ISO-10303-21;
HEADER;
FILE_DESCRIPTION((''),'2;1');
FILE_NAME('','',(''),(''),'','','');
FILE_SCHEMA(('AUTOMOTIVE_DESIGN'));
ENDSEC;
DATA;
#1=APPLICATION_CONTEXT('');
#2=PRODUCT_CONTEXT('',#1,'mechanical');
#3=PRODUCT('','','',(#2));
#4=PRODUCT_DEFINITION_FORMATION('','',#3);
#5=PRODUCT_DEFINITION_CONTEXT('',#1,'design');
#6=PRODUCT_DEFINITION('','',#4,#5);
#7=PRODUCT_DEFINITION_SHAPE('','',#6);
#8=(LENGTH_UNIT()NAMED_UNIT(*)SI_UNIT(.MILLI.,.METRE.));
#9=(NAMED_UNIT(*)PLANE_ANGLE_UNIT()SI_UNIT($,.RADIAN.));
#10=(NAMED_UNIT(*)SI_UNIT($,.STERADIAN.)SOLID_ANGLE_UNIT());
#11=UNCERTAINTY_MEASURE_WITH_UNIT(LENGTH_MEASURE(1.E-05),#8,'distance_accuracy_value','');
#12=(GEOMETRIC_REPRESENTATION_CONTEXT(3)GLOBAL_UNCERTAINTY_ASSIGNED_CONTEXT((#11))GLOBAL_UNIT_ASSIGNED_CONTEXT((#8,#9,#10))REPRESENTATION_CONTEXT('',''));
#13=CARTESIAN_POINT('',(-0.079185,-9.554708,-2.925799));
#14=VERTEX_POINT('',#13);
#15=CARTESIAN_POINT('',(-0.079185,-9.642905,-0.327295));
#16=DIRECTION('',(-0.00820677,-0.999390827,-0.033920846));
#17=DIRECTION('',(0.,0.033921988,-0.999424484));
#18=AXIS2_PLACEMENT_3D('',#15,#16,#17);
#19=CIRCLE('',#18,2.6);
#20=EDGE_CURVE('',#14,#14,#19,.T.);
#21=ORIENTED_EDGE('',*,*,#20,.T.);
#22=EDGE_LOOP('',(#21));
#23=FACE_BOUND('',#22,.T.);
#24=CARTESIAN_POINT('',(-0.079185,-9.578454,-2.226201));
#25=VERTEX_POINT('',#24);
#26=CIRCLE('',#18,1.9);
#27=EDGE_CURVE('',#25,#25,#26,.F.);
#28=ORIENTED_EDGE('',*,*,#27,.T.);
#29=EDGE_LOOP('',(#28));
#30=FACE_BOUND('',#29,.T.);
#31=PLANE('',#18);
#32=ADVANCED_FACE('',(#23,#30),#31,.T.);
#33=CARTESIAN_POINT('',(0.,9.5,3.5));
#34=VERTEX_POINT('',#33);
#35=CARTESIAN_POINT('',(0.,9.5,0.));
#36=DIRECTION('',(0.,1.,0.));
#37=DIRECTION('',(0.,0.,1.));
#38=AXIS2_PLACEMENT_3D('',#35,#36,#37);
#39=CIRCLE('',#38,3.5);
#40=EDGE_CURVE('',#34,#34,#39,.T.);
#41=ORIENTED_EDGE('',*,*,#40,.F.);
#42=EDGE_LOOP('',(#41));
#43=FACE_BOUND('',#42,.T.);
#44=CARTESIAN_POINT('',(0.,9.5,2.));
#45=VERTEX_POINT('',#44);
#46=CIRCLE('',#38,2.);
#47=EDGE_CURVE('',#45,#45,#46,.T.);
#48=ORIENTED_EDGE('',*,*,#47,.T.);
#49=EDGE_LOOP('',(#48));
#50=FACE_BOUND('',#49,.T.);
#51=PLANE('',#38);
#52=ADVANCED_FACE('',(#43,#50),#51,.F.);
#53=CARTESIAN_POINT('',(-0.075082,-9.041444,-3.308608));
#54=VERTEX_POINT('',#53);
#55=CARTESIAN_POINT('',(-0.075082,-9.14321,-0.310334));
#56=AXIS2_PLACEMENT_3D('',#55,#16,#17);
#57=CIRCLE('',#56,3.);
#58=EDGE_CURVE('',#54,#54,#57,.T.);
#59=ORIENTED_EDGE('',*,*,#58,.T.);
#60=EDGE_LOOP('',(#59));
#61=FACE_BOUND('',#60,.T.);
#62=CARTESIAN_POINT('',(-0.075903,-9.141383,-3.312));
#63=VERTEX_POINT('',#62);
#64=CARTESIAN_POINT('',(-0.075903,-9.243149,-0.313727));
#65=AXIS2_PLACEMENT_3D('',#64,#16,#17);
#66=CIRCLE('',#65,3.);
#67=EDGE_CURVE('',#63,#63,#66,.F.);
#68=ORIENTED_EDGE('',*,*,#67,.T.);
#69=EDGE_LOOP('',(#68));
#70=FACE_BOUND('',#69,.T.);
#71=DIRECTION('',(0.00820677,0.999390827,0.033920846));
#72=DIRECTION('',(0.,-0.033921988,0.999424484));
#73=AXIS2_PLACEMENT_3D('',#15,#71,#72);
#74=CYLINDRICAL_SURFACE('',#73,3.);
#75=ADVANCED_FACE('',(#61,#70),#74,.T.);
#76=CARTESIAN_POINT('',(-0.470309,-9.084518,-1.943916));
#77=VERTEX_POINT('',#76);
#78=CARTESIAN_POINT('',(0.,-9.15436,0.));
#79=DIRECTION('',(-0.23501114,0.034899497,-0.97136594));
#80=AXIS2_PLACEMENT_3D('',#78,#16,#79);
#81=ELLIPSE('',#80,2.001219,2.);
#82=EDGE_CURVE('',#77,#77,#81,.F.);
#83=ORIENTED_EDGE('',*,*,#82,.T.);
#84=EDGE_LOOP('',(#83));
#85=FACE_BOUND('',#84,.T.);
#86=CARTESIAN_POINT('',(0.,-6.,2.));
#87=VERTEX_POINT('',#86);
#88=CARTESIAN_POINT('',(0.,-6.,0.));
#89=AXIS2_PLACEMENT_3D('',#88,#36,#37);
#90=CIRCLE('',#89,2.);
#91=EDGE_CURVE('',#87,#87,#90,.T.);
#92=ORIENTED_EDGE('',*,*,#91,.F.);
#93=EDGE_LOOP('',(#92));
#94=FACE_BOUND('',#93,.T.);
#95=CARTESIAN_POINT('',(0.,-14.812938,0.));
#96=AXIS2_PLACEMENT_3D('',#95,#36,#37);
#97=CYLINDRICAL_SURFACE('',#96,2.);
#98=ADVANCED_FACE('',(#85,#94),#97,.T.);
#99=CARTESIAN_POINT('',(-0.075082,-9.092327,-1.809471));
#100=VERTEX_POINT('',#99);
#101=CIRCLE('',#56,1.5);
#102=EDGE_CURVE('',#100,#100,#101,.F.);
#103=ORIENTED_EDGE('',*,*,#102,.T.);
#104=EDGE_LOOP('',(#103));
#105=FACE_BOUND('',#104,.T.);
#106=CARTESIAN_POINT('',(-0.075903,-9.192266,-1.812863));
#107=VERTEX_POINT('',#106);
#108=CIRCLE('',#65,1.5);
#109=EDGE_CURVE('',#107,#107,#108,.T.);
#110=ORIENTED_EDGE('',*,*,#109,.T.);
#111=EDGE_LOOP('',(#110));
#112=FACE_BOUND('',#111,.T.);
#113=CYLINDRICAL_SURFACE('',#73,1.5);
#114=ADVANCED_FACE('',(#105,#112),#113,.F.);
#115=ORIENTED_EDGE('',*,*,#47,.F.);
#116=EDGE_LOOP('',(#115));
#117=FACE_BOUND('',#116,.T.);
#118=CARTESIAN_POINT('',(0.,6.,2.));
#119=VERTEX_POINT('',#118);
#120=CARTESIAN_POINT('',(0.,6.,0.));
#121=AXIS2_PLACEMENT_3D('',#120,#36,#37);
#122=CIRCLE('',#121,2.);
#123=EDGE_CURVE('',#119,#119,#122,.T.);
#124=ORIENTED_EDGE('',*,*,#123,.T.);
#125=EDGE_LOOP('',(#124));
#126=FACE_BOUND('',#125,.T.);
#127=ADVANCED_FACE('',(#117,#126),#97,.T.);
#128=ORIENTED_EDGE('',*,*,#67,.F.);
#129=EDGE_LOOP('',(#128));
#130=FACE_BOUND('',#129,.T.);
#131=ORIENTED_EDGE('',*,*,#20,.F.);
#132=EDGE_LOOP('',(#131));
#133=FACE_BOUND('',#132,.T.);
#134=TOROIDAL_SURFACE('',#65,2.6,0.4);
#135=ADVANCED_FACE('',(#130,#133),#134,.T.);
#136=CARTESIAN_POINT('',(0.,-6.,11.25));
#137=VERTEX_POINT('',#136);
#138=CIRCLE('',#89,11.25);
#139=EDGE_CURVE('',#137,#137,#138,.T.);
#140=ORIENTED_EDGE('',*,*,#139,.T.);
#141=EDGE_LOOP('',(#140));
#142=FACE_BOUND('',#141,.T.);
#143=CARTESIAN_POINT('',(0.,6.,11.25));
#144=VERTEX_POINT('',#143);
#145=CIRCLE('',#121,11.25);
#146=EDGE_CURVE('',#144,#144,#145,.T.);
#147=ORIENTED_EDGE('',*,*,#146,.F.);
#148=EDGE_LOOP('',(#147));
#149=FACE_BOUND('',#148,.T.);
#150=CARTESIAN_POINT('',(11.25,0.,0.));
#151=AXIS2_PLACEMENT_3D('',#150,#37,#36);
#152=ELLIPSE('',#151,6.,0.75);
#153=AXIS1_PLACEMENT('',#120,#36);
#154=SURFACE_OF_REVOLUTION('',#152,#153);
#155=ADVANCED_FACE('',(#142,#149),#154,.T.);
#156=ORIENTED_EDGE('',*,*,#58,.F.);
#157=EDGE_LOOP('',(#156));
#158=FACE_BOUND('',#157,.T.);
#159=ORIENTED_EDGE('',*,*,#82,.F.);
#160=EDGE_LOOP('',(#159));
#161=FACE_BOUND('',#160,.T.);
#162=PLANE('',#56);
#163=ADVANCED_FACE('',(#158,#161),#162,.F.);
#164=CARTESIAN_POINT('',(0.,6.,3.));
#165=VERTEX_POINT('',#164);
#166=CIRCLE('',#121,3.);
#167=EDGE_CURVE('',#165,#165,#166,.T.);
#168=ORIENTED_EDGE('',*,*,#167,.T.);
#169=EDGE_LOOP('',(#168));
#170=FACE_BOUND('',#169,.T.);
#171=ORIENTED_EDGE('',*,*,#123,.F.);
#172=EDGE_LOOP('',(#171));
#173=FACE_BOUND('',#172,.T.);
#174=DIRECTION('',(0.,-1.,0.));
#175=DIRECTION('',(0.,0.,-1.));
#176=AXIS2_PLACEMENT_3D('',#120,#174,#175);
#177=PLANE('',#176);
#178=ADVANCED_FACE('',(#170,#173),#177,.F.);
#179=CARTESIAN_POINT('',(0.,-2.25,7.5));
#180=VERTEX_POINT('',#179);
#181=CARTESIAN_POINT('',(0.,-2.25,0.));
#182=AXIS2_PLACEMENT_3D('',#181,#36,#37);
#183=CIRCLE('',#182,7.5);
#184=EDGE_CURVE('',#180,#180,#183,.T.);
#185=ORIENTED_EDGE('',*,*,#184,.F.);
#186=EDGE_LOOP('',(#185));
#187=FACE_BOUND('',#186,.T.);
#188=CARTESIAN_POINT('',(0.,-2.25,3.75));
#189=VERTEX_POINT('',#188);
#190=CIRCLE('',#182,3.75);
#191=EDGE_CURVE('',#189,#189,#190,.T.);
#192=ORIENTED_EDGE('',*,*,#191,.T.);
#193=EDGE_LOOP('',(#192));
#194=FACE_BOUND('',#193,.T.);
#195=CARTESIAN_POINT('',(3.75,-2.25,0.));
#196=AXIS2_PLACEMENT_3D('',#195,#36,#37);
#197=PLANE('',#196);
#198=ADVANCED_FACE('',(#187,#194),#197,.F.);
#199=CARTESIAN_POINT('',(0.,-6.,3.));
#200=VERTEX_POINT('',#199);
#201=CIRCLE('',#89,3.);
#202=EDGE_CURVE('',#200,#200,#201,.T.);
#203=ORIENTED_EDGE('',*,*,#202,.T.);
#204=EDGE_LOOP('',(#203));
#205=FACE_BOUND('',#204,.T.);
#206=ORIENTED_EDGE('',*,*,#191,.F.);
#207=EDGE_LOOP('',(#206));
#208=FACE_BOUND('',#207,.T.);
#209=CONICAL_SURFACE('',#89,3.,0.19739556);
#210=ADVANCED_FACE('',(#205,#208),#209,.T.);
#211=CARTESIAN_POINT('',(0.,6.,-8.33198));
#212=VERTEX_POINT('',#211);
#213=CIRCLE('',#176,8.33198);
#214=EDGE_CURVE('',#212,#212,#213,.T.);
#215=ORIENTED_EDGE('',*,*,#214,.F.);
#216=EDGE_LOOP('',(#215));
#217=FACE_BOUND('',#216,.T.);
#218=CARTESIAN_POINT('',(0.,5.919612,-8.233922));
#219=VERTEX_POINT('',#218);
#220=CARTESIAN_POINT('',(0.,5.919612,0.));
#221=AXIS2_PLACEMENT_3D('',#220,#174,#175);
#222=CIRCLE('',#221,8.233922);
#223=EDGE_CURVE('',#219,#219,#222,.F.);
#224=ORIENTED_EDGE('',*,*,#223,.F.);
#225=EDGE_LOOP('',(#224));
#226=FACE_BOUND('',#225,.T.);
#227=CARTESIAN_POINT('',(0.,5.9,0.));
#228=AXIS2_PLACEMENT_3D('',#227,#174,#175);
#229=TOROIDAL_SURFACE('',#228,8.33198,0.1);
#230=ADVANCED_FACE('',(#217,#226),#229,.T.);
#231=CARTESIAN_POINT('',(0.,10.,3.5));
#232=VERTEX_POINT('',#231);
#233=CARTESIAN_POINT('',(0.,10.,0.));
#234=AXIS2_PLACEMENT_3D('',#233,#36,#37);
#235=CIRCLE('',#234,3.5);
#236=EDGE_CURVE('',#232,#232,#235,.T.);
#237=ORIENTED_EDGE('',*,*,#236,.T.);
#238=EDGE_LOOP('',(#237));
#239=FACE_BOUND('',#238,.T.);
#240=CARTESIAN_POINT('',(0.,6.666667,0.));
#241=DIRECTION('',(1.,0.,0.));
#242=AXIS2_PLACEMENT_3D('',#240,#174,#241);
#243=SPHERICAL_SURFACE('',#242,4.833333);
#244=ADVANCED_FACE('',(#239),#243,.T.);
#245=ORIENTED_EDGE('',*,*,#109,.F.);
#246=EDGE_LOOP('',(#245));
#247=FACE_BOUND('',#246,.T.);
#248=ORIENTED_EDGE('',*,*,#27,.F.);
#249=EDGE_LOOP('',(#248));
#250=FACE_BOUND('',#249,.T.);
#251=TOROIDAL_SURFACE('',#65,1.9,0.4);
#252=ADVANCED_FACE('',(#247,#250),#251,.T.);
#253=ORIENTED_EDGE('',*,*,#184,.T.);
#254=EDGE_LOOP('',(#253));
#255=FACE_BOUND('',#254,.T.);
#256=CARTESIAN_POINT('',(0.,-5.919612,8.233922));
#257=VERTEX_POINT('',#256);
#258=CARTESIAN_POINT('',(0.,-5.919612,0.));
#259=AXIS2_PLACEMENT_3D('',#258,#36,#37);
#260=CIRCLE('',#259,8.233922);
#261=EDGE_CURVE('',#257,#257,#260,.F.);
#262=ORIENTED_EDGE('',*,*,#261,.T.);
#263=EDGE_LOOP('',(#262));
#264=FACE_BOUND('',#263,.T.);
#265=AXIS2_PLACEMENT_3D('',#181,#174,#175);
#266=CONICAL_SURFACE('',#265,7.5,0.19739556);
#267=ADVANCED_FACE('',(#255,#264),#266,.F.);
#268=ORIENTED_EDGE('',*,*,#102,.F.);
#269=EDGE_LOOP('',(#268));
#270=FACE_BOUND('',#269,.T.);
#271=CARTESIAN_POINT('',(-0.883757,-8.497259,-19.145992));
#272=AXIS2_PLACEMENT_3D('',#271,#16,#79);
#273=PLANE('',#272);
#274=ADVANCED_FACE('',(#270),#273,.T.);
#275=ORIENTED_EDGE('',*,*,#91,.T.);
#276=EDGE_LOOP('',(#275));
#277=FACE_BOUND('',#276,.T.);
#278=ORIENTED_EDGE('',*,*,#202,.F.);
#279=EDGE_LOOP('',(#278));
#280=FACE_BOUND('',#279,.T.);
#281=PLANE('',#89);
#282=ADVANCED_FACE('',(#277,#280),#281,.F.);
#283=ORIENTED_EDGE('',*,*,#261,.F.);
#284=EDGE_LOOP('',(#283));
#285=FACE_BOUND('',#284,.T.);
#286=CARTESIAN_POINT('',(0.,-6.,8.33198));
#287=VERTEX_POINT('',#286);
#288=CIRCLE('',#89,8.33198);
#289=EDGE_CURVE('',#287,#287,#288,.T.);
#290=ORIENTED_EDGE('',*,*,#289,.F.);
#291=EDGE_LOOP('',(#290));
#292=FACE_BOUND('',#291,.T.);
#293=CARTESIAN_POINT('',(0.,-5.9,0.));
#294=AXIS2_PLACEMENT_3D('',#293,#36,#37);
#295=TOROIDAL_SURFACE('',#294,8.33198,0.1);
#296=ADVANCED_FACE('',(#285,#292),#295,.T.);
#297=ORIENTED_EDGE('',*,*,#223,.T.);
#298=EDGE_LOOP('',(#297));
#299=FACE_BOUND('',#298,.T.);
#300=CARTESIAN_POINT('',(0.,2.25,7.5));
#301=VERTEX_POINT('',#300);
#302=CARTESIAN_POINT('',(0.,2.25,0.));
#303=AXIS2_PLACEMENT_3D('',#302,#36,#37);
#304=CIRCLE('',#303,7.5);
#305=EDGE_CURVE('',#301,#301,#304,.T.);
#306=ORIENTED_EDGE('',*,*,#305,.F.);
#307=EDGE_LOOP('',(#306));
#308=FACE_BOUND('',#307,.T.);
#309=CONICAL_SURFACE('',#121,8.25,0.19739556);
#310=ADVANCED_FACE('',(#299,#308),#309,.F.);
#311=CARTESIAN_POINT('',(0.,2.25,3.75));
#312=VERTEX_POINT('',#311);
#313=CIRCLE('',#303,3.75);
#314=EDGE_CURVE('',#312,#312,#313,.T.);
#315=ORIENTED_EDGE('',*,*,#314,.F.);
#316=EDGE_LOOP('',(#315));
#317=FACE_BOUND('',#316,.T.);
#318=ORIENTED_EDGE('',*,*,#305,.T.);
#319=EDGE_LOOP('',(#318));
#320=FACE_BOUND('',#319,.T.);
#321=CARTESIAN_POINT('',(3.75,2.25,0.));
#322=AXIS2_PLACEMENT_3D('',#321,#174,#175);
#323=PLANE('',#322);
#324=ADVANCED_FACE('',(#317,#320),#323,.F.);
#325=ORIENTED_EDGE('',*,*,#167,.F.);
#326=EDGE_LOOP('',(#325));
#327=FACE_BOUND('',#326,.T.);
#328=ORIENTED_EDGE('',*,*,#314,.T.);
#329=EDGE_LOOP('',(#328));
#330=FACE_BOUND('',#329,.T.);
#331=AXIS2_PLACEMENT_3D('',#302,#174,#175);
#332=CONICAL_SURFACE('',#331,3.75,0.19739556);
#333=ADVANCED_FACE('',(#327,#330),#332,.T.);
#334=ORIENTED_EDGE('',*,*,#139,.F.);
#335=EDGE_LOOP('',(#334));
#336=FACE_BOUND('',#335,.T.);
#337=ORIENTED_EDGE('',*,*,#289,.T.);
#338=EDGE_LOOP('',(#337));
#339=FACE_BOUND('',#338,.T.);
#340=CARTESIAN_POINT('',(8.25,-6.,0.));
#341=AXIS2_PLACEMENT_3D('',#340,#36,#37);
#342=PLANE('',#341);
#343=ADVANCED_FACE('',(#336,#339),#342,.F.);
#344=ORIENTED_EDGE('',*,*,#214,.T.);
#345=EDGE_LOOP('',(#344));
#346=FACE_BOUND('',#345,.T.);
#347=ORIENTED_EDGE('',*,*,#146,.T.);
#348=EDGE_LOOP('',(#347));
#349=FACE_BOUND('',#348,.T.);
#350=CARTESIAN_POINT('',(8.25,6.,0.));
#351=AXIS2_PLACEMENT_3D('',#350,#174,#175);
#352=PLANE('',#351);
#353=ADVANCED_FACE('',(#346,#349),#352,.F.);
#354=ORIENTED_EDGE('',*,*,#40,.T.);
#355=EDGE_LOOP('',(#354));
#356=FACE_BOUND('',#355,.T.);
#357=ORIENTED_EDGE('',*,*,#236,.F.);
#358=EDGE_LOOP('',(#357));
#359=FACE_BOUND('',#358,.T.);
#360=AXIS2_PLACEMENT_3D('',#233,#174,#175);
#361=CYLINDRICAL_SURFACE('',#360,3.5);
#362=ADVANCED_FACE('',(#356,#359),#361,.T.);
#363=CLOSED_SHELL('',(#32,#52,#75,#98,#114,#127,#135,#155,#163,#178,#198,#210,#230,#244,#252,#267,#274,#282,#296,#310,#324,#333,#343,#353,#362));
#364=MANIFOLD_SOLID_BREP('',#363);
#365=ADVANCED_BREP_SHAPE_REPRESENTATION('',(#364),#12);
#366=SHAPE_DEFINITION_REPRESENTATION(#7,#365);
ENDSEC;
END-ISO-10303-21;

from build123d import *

# Parameters (mm, degrees)
CROQUIS2_R           = 2
EXTRUIR1_DEPTH       = 21.78461
EXTRUIR2_START       = -18.724201
EXTRUIR2_OUTLINE_R   = 2
EXTRUIR2_DEPTH       = 18.724201
EXTRUIR2_START_2     = -10
EXTRUIR2_2_OUTLINE_W = 7
EXTRUIR2_2_OUTLINE_H = 7
EXTRUIR2_2_DEPTH     = 0.851217
REDONDEO1_R          = 0.1
CROQUIS7_R           = 3.5
EXTRUIR3_DEPTH       = 0.5
CROQUIS9_R           = 3
CROQUIS9_R_2         = 1.5
EXTRUIR4_DEPTH       = 0.5
REDONDEO5_R          = 0.4


with BuildPart() as part:
    # Croquis1 → Revolución1 (revolve)
    with BuildSketch(Plane.XY, mode=Mode.PRIVATE) as revoluci_n1_sk:
        with BuildLine():
            Line((0, 6), (0, -6))
            Line((0, -6), (3, -6))
            Line((3, -6), (3.75, -2.25))
            Line((3.75, -2.25), (7.5, -2.25))
            Line((7.5, -2.25), (8.25, -6))
            Line((8.25, -6), (11.25, -6))
            add(Edge.make_bspline(
                [(11.25, -6), (12, -6), (12, 0), (12, 6), (11.25, 6)],
                knots=[3.141593, 3.141593, 3.141593, 4.712389, 4.712389, 6.283185, 6.283185, 6.283185], degree=2, weights=[1, 0.707107, 1, 0.707107, 1]))
            Line((11.25, 6), (8.25, 6))
            Line((8.25, 6), (7.5, 2.25))
            Line((7.5, 2.25), (3.75, 2.25))
            Line((3.75, 2.25), (3, 6))
            Line((3, 6), (0, 6))
        make_face()
    revolve(revoluci_n1_sk.sketch.rotate(Axis((0, 6, 0), (0, -1, 0)), 90), axis=Axis((0, 6, 0), (0, -1, 0)))

    # Croquis2 → Extruir1 (cut, through all)
    with BuildSketch(Plane(origin=(0, 6, 0), x_dir=(1, 0, 0), z_dir=(0, 1, 0))):
        with Locations(Location((0, 0, 0), (0, 0, 270))):
            Circle(CROQUIS2_R)
    extrude(amount=-EXTRUIR1_DEPTH, mode=Mode.SUBTRACT)

    # Extruir2: read off the stored shape, not the designer's step
    # Extruir2 outline → Extruir2 (add)
    with BuildSketch(Plane(origin=(0, 9.5, 0), x_dir=(-1, 0, 0), z_dir=(0, 1, 0)).offset(EXTRUIR2_START)):
        Circle(EXTRUIR2_OUTLINE_R)
    extrude(amount=EXTRUIR2_DEPTH)

    # Extruir2 2 outline → Extruir2 2 (cut)
    with BuildSketch(Plane(origin=(0, 0, 0), x_dir=(0.9999663238972207, -0.008202046727068174, -0.00027838995218587836), z_dir=(0.008206769856556707, 0.9993908270190958, 0.033920846077440184)).offset(EXTRUIR2_START_2)):
        with Locations((0.5, -0.5)):
            Rectangle(EXTRUIR2_2_OUTLINE_W, EXTRUIR2_2_OUTLINE_H)
    extrude(amount=EXTRUIR2_2_DEPTH, mode=Mode.SUBTRACT)

    # Redondeo1
    redondeo1_edges = [part.edges().sort_by_distance(p)[0] for p in [
        (0, -6, -8.25),
        (0, 6, -8.25),
    ]]
    fillet(redondeo1_edges, radius=REDONDEO1_R)

    # Croquis7 → Extruir3 (add)
    with BuildSketch(Plane(origin=(0, 9.5, 0), x_dir=(-1, 0, 0), z_dir=(0, 1, 0))):
        with Locations(Location((0, 0, 0), (0, 0, 90))):
            Circle(CROQUIS7_R)
    extrude(amount=EXTRUIR3_DEPTH)

    # Croquis8 → Revolución2 (revolve)
    with BuildSketch(Plane.XY, mode=Mode.PRIVATE) as revoluci_n2_sk:
        with BuildLine():
            Line((0, 10), (3.5, 10))
            ThreePointArc((3.5, 10), (1.903943, 11.109201), (0, 11.5))
            Line((0, 11.5), (0, 10))
        make_face()
    revolve(revoluci_n2_sk.sketch.rotate(Axis((0, 10, 0), (0, 1, 0)), 270), axis=Axis((0, 10, 0), (0, 1, 0)))

    # Croquis9 → Extruir4 (add)
    with BuildSketch(Plane(origin=(-0.075082, -9.14321, -0.310334), x_dir=(0.9999663137854952, -0.00820687074355578, -0.00013626021872642963), z_dir=(-0.00820676985655671, -0.9993908270190959, -0.033920846077440225))):
        with Locations(Location((0, 0, 0), (0, 0, 269.991852))):
            Circle(CROQUIS9_R)
        with Locations(Location((0, 0, 0), (0, 0, 269.991852))):
            Circle(CROQUIS9_R_2, mode=Mode.SUBTRACT)
    extrude(amount=EXTRUIR4_DEPTH)

    # Redondeo5
    redondeo5_edges = [part.edges().sort_by_distance(p)[0] for p in [
        (-0.079185, -9.744671, 2.670979),
        (-0.079185, -9.693788, 1.171842),
    ]]
    fillet(redondeo5_edges, radius=REDONDEO5_R)


solid = part.part
